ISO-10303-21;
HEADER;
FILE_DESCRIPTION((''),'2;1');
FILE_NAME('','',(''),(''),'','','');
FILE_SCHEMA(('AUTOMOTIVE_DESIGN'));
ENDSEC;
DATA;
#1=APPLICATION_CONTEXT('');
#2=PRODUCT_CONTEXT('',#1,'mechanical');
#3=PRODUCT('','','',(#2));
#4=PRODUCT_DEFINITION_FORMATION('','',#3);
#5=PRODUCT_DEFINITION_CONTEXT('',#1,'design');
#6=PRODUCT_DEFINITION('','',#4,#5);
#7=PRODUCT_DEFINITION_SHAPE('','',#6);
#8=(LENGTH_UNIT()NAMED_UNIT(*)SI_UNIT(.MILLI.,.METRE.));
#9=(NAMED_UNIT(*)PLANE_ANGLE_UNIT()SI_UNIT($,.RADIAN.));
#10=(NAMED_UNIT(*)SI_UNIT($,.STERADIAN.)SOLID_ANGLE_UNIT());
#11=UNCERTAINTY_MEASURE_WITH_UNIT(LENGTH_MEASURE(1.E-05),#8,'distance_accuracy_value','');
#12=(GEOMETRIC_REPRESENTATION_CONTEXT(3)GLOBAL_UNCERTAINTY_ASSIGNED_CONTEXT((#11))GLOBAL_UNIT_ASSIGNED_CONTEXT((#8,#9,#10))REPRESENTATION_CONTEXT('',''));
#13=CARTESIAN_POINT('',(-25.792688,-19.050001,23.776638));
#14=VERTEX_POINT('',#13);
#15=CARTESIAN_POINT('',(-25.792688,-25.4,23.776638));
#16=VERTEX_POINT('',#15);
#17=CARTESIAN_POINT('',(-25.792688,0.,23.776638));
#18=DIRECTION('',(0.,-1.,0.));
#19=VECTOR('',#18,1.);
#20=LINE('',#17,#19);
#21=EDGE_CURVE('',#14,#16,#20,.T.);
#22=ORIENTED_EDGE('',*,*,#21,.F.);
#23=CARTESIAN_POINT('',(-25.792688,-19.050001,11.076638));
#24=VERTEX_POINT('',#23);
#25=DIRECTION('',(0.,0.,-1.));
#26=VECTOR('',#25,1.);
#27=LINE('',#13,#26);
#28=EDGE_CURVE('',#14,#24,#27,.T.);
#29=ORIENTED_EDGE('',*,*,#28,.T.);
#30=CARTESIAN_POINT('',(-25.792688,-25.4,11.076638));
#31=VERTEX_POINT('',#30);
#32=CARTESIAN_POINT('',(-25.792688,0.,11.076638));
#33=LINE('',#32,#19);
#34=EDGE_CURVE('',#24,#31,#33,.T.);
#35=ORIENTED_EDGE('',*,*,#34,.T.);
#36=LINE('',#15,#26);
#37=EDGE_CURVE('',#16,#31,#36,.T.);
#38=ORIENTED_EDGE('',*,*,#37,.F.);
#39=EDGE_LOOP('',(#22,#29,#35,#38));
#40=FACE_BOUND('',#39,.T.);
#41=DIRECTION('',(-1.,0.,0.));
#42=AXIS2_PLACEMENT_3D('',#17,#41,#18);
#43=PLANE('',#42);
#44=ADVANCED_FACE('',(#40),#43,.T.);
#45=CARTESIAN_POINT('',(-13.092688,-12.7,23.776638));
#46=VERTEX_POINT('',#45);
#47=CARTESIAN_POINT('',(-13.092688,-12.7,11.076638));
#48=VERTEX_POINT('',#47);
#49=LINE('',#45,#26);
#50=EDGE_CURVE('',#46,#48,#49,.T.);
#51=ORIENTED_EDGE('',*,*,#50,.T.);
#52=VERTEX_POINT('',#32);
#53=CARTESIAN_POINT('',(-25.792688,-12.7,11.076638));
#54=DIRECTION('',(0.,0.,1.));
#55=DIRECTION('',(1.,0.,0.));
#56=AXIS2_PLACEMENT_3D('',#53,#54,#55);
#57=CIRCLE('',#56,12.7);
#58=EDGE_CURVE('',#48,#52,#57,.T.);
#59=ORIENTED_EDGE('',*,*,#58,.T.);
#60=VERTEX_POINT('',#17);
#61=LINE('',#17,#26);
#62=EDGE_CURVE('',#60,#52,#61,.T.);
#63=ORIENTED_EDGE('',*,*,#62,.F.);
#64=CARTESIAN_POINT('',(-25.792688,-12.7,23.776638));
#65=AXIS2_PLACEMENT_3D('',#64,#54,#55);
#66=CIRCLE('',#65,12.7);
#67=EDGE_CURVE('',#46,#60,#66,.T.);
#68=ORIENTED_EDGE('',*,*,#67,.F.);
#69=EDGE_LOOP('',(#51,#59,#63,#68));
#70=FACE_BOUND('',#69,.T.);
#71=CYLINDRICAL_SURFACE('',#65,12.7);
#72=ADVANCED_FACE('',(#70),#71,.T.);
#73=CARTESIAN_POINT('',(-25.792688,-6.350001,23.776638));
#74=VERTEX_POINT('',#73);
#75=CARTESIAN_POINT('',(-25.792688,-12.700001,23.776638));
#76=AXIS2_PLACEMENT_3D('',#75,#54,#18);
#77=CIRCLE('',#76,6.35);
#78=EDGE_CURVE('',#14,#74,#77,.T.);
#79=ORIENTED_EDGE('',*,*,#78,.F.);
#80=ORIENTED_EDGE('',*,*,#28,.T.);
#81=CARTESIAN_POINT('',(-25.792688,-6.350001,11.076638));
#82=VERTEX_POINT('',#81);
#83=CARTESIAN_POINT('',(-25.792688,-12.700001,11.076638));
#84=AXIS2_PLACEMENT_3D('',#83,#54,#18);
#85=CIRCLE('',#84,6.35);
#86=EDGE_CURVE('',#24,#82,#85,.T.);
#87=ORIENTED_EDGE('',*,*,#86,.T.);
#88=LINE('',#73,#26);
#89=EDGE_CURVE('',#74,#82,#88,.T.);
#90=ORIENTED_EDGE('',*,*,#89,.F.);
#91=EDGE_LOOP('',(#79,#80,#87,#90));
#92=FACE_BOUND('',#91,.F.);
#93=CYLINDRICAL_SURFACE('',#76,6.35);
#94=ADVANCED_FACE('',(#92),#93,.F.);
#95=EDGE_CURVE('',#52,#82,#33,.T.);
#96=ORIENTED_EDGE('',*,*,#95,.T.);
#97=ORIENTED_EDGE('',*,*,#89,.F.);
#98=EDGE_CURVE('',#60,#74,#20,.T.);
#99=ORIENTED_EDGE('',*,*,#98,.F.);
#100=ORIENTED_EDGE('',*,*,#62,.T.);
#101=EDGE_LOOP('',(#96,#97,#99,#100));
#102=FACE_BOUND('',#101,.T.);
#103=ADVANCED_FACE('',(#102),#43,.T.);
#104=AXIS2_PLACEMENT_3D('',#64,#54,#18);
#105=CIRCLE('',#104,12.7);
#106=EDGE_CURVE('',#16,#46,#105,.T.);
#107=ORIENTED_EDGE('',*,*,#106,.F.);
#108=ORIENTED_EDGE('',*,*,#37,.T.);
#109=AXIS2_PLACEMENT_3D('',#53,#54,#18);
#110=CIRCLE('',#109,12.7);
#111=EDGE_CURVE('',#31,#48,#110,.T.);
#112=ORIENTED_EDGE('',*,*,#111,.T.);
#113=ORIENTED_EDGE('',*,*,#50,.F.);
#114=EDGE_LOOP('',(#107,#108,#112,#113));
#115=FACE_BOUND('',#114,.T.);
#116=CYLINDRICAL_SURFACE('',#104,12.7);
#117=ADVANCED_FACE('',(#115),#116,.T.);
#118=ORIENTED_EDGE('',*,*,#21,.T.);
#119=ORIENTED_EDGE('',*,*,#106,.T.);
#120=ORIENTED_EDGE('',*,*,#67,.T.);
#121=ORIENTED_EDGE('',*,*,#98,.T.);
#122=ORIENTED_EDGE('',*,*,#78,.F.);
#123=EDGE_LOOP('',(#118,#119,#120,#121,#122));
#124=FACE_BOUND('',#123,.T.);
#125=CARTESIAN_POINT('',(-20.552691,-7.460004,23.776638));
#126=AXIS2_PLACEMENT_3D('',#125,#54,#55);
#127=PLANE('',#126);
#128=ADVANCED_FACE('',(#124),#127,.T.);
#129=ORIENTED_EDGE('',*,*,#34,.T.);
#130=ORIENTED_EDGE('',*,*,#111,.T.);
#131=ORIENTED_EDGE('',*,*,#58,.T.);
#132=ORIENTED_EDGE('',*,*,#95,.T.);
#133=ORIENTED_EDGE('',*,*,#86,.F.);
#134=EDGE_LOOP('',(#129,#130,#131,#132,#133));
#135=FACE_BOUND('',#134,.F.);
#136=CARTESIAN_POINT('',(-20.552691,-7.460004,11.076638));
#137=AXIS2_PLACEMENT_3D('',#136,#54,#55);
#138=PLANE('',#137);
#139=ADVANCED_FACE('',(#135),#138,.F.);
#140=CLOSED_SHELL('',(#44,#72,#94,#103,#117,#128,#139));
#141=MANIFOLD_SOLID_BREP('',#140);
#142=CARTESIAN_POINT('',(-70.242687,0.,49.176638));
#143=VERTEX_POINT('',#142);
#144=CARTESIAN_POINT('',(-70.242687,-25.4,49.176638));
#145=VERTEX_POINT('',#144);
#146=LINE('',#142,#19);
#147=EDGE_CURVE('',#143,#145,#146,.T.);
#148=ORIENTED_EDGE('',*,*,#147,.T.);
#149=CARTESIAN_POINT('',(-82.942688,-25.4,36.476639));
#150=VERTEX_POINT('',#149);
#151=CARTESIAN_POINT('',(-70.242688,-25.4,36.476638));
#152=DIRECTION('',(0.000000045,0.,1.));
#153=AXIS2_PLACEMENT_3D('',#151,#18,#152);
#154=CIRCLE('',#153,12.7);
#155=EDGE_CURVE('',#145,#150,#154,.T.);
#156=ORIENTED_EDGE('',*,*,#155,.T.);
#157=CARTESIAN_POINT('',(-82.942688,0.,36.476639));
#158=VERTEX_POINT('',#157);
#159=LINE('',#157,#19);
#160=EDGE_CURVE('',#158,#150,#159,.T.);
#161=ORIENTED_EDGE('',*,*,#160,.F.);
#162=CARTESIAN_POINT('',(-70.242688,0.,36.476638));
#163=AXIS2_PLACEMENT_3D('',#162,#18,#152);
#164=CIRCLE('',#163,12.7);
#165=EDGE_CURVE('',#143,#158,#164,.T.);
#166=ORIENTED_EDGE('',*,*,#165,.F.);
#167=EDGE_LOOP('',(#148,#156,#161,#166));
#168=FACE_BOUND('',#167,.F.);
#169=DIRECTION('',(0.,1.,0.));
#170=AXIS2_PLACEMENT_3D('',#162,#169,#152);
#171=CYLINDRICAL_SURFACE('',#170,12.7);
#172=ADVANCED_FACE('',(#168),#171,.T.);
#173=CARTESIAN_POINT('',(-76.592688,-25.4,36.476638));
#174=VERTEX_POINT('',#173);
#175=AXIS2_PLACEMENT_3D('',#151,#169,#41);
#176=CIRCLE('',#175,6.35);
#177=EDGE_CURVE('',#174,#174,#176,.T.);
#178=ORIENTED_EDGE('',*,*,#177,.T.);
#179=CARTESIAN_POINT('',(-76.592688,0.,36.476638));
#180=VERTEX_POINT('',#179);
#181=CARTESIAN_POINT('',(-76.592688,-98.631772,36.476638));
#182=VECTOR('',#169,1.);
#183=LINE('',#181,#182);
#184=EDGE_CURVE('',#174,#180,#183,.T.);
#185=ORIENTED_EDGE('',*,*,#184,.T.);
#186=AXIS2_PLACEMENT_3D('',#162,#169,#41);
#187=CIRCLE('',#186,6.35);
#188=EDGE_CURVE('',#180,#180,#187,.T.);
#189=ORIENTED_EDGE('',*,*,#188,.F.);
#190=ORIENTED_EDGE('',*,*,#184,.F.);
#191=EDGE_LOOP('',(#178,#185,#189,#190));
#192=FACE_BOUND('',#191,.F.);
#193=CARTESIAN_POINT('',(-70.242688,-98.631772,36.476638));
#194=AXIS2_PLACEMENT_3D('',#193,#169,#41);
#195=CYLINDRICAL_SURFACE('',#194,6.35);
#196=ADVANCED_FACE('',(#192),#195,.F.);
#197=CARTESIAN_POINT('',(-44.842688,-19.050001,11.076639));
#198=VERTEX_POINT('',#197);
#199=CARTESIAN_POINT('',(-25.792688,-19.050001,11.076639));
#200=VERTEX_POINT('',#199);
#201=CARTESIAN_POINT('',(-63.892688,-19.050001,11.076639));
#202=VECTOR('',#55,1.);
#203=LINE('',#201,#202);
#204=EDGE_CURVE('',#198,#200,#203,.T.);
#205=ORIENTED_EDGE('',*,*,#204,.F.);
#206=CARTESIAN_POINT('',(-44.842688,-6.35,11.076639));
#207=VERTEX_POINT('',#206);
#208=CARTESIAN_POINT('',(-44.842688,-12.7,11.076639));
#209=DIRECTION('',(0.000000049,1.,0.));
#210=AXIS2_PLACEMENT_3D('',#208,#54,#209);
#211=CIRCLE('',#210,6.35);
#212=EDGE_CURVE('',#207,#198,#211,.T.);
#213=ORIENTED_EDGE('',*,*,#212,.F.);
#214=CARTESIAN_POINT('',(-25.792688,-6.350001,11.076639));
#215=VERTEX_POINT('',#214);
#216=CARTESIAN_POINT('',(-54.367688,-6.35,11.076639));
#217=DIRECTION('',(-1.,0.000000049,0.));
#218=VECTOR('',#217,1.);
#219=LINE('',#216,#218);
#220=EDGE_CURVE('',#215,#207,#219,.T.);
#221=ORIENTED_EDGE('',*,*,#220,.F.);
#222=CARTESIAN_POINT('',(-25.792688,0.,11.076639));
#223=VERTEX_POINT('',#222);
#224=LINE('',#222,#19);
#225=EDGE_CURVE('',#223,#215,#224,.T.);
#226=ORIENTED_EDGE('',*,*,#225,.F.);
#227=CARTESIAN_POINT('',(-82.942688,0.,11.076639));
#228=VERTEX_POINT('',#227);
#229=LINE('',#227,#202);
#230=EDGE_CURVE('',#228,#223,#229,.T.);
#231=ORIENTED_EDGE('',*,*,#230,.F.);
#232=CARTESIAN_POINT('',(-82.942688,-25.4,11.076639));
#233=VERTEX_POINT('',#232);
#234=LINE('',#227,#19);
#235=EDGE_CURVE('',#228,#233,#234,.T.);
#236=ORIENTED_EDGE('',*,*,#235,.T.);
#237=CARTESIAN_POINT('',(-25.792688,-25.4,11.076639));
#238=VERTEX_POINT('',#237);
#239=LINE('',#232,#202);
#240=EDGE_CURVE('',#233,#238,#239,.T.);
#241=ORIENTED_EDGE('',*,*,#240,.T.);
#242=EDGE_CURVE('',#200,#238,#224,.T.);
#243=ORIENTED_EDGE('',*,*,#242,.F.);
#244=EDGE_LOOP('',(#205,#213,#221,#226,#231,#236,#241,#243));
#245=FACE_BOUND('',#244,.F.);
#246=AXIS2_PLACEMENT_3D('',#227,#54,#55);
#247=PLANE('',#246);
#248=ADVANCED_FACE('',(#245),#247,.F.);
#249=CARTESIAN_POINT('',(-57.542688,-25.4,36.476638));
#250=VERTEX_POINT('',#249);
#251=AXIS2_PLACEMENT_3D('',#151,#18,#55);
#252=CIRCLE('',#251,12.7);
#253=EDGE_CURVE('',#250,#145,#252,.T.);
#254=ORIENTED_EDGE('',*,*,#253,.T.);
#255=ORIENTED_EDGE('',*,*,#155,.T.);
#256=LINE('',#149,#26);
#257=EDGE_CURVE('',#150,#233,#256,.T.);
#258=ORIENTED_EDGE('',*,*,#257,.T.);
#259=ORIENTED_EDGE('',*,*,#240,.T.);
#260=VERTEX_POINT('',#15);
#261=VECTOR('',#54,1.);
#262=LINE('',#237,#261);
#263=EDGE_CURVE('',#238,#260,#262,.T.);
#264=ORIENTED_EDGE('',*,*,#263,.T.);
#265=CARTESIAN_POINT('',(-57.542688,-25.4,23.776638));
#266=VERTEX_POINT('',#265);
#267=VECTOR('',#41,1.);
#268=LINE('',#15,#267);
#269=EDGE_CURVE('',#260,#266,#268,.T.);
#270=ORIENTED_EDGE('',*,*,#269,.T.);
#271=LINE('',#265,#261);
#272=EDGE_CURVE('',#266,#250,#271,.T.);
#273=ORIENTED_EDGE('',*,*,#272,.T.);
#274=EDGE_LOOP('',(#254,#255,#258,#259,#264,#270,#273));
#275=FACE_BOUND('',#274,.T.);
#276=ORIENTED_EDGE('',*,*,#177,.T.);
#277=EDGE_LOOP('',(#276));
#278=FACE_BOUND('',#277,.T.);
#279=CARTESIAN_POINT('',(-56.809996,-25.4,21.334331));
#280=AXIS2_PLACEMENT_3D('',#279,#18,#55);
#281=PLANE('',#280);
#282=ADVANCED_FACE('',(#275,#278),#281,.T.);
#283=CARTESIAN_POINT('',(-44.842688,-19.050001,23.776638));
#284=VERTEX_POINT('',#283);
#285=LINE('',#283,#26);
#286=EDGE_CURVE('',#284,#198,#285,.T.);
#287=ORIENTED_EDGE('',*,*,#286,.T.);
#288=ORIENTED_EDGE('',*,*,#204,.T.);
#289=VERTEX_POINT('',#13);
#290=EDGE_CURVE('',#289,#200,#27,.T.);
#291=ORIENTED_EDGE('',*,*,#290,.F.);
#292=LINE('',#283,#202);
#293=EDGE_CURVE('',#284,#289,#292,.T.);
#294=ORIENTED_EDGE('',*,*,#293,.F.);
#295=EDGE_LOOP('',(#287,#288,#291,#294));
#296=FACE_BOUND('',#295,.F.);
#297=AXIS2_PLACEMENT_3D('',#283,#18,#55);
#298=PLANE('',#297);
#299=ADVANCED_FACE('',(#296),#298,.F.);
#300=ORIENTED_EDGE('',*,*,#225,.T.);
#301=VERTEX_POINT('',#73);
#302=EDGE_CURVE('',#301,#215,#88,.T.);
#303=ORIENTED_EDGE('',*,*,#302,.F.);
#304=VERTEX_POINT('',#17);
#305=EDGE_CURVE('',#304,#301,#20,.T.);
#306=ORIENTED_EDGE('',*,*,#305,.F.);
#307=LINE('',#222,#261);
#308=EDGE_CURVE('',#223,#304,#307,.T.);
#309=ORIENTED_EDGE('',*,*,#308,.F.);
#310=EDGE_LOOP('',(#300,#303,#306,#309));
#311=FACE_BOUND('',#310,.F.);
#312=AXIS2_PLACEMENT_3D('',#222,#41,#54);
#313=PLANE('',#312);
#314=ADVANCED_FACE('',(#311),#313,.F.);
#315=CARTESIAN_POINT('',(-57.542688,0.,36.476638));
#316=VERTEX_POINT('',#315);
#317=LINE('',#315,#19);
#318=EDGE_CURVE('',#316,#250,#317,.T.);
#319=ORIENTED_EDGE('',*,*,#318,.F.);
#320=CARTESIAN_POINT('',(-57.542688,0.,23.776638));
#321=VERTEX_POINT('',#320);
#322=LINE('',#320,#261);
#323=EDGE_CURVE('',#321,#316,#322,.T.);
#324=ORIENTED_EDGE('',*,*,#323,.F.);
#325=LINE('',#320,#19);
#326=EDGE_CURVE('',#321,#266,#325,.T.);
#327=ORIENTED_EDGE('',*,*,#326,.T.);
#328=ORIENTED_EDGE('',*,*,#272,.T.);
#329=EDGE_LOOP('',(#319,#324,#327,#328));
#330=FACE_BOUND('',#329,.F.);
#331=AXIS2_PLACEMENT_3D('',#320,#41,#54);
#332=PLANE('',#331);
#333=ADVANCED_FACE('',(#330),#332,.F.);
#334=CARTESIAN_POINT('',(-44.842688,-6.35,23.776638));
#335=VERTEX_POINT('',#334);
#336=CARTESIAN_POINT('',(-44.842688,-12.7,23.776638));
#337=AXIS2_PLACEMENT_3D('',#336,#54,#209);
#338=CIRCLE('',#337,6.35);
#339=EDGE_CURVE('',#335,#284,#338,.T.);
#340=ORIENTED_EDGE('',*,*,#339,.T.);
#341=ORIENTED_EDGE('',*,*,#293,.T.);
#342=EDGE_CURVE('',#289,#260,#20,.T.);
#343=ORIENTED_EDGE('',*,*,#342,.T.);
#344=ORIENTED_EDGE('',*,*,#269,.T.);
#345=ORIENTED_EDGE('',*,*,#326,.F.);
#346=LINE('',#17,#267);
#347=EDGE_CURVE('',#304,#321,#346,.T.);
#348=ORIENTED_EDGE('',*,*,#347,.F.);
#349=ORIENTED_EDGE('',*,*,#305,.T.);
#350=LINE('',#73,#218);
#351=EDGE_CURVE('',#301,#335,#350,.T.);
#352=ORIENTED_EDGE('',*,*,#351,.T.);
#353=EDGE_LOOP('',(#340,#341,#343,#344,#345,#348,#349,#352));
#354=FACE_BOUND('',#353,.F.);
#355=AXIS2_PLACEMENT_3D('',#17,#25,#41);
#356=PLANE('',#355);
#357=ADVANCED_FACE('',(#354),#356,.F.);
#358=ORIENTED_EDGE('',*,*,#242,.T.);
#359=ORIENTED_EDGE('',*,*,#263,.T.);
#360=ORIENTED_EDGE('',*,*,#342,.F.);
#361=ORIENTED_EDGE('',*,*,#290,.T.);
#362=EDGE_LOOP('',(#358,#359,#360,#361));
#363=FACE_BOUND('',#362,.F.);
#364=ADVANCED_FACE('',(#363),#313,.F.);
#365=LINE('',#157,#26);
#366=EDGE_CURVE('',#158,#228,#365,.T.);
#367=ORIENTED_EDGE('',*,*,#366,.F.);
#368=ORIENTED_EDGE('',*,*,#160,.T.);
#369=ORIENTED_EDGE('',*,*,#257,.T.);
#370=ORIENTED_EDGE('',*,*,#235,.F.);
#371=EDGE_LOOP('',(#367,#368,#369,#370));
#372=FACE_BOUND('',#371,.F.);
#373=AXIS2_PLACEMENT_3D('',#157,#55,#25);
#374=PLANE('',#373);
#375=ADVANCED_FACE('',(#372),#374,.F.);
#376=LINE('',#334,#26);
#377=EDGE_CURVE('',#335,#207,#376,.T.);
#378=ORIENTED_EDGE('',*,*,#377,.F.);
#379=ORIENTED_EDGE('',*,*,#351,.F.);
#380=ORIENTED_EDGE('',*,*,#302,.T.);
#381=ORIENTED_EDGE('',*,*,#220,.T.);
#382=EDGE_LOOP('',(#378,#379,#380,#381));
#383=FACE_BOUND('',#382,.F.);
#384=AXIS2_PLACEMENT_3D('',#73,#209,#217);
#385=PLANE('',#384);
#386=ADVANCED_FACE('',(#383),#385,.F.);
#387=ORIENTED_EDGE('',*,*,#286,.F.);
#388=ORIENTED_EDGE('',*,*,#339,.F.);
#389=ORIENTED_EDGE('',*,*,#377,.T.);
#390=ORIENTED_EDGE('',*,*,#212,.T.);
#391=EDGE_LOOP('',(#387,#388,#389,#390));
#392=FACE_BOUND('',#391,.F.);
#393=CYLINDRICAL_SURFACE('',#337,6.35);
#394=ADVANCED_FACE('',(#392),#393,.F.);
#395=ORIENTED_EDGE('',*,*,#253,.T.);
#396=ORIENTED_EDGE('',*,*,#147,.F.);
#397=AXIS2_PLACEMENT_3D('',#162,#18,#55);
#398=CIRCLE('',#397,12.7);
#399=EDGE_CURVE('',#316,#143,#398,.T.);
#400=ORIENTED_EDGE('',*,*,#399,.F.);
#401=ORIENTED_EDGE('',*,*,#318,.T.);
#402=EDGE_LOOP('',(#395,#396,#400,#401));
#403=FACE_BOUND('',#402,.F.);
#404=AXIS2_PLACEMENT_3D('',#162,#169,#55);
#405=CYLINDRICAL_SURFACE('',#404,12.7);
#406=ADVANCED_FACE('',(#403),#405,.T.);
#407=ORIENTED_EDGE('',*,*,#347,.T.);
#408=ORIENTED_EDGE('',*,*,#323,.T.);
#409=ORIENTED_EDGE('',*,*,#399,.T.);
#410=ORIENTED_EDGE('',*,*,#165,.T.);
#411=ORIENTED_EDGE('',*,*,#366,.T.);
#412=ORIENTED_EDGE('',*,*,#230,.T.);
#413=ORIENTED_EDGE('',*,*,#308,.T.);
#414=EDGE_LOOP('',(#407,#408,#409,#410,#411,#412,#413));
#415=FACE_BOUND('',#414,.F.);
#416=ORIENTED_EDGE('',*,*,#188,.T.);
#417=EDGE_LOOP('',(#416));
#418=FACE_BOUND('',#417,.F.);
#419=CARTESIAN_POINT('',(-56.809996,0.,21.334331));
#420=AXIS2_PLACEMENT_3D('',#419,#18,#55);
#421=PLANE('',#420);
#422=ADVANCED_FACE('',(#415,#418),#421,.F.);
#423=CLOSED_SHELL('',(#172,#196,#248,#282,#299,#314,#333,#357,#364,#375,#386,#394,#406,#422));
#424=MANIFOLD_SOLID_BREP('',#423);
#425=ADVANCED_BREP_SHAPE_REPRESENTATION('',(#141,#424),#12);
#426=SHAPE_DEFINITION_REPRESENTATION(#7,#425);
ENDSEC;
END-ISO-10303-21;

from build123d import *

# Parameters (mm, degrees)
F1_DEPTH = 25.4
F3_DEPTH = 12.7
F5_D     = 12.7
F7_DEPTH = 25.4


# Not quite as in the source:
# - ends of sketch curves that miss each other by under 0.0002 mm in the source are joined


with BuildPart() as f1:
    # F0 (on Front) → F1 (new body)
    with BuildSketch(Plane.XZ):
        Polygon((-70.2426877682, 36.4766385419), (-82.9426877682, 36.4766391127), (-82.9426877682, 11.0766391127), (-25.7926877682, 11.0766391127), (-25.7926877682, 23.776637971), (-57.5426877682, 23.776637971), (-57.5426877682, 36.476637971), align=None)
        with BuildLine():
            Line((-70.2426871973, 49.176637971), (-70.2426877682, 36.476637971))
            Line((-70.2426877682, 36.476637971), (-57.5426877682, 36.476637971))
            ThreePointArc((-57.5426877682, 36.476637971), (-61.2624314453, 45.4568938903), (-70.2426871973, 49.176637971))
        make_face()
        with BuildLine():
            ThreePointArc((-70.2426871973, 49.176637971), (-79.2229432838, 45.4568946976), (-82.9426877682, 36.4766391127))
            Line((-82.9426877682, 36.4766391127), (-70.2426877682, 36.4766385419))
            Line((-70.2426877682, 36.4766385419), (-70.2426871973, 49.176637971))
        make_face()
    extrude(amount=F1_DEPTH)

    # F5 (through all)
    with Locations(Plane.XZ.offset(25.4)):
        with Locations((-70.2426877682, 36.476637971)):
            Hole(F5_D / 2)


with BuildPart() as f3:
    # F2 (on face) → F3 (new body)
    with BuildSketch(Plane.XY.offset(23.776637971)):
        with BuildLine():
            Line((-25.7926877682, -12.7), (-13.0926877682, -12.7))
            ThreePointArc((-13.0926877682, -12.7), (-16.8124316471, -3.7197438789), (-25.7926877682, 0))
            Line((-25.7926877682, 0), (-25.7926877682, -12.7))
        make_face()
        with BuildLine():
            Line((-25.7926877682, -12.7), (-25.7926877682, -25.4))
            ThreePointArc((-25.7926877682, -25.4), (-16.8124316471, -21.6802561211), (-13.0926877682, -12.7))
            Line((-13.0926877682, -12.7), (-25.7926877682, -12.7))
        make_face()
    extrude(amount=-F3_DEPTH)


with BuildPart() as f7_tool:
    # F6 (on face) → F7 (new body)
    with BuildSketch(Plane.XY.offset(23.776637971)):
        with BuildLine():
            ThreePointArc((-25.7926877682, -19.0500009306), (-19.4426877682, -12.7000009306), (-25.7926877682, -6.3500009306))
            Line((-25.7926877682, -6.3500009306), (-25.7926877682, -19.0500009306))
        make_face()
        Polygon((-25.7926877682, -6.3500009306), (-44.8426877682, -6.35), (-44.8426877682, -19.0500009306), (-25.7926877682, -19.0500009306), align=None)
        with BuildLine():
            Line((-44.8426877682, -19.0500009306), (-44.8426877682, -6.35))
            ThreePointArc((-44.8426877682, -6.35), (-51.1926885437, -12.7000004653), (-44.8426877682, -19.0500009306))
        make_face()
    extrude(amount=-F7_DEPTH)


with BuildPart() as f1_1:
    add(f1.part)

    # F7: cut by f7_tool
    add(f7_tool.part, mode=Mode.SUBTRACT)


with BuildPart() as f3_1:
    add(f3.part)

    # F7: cut by f7_tool
    add(f7_tool.part, mode=Mode.SUBTRACT)


solid = Compound([f1_1.part, f3_1.part])
